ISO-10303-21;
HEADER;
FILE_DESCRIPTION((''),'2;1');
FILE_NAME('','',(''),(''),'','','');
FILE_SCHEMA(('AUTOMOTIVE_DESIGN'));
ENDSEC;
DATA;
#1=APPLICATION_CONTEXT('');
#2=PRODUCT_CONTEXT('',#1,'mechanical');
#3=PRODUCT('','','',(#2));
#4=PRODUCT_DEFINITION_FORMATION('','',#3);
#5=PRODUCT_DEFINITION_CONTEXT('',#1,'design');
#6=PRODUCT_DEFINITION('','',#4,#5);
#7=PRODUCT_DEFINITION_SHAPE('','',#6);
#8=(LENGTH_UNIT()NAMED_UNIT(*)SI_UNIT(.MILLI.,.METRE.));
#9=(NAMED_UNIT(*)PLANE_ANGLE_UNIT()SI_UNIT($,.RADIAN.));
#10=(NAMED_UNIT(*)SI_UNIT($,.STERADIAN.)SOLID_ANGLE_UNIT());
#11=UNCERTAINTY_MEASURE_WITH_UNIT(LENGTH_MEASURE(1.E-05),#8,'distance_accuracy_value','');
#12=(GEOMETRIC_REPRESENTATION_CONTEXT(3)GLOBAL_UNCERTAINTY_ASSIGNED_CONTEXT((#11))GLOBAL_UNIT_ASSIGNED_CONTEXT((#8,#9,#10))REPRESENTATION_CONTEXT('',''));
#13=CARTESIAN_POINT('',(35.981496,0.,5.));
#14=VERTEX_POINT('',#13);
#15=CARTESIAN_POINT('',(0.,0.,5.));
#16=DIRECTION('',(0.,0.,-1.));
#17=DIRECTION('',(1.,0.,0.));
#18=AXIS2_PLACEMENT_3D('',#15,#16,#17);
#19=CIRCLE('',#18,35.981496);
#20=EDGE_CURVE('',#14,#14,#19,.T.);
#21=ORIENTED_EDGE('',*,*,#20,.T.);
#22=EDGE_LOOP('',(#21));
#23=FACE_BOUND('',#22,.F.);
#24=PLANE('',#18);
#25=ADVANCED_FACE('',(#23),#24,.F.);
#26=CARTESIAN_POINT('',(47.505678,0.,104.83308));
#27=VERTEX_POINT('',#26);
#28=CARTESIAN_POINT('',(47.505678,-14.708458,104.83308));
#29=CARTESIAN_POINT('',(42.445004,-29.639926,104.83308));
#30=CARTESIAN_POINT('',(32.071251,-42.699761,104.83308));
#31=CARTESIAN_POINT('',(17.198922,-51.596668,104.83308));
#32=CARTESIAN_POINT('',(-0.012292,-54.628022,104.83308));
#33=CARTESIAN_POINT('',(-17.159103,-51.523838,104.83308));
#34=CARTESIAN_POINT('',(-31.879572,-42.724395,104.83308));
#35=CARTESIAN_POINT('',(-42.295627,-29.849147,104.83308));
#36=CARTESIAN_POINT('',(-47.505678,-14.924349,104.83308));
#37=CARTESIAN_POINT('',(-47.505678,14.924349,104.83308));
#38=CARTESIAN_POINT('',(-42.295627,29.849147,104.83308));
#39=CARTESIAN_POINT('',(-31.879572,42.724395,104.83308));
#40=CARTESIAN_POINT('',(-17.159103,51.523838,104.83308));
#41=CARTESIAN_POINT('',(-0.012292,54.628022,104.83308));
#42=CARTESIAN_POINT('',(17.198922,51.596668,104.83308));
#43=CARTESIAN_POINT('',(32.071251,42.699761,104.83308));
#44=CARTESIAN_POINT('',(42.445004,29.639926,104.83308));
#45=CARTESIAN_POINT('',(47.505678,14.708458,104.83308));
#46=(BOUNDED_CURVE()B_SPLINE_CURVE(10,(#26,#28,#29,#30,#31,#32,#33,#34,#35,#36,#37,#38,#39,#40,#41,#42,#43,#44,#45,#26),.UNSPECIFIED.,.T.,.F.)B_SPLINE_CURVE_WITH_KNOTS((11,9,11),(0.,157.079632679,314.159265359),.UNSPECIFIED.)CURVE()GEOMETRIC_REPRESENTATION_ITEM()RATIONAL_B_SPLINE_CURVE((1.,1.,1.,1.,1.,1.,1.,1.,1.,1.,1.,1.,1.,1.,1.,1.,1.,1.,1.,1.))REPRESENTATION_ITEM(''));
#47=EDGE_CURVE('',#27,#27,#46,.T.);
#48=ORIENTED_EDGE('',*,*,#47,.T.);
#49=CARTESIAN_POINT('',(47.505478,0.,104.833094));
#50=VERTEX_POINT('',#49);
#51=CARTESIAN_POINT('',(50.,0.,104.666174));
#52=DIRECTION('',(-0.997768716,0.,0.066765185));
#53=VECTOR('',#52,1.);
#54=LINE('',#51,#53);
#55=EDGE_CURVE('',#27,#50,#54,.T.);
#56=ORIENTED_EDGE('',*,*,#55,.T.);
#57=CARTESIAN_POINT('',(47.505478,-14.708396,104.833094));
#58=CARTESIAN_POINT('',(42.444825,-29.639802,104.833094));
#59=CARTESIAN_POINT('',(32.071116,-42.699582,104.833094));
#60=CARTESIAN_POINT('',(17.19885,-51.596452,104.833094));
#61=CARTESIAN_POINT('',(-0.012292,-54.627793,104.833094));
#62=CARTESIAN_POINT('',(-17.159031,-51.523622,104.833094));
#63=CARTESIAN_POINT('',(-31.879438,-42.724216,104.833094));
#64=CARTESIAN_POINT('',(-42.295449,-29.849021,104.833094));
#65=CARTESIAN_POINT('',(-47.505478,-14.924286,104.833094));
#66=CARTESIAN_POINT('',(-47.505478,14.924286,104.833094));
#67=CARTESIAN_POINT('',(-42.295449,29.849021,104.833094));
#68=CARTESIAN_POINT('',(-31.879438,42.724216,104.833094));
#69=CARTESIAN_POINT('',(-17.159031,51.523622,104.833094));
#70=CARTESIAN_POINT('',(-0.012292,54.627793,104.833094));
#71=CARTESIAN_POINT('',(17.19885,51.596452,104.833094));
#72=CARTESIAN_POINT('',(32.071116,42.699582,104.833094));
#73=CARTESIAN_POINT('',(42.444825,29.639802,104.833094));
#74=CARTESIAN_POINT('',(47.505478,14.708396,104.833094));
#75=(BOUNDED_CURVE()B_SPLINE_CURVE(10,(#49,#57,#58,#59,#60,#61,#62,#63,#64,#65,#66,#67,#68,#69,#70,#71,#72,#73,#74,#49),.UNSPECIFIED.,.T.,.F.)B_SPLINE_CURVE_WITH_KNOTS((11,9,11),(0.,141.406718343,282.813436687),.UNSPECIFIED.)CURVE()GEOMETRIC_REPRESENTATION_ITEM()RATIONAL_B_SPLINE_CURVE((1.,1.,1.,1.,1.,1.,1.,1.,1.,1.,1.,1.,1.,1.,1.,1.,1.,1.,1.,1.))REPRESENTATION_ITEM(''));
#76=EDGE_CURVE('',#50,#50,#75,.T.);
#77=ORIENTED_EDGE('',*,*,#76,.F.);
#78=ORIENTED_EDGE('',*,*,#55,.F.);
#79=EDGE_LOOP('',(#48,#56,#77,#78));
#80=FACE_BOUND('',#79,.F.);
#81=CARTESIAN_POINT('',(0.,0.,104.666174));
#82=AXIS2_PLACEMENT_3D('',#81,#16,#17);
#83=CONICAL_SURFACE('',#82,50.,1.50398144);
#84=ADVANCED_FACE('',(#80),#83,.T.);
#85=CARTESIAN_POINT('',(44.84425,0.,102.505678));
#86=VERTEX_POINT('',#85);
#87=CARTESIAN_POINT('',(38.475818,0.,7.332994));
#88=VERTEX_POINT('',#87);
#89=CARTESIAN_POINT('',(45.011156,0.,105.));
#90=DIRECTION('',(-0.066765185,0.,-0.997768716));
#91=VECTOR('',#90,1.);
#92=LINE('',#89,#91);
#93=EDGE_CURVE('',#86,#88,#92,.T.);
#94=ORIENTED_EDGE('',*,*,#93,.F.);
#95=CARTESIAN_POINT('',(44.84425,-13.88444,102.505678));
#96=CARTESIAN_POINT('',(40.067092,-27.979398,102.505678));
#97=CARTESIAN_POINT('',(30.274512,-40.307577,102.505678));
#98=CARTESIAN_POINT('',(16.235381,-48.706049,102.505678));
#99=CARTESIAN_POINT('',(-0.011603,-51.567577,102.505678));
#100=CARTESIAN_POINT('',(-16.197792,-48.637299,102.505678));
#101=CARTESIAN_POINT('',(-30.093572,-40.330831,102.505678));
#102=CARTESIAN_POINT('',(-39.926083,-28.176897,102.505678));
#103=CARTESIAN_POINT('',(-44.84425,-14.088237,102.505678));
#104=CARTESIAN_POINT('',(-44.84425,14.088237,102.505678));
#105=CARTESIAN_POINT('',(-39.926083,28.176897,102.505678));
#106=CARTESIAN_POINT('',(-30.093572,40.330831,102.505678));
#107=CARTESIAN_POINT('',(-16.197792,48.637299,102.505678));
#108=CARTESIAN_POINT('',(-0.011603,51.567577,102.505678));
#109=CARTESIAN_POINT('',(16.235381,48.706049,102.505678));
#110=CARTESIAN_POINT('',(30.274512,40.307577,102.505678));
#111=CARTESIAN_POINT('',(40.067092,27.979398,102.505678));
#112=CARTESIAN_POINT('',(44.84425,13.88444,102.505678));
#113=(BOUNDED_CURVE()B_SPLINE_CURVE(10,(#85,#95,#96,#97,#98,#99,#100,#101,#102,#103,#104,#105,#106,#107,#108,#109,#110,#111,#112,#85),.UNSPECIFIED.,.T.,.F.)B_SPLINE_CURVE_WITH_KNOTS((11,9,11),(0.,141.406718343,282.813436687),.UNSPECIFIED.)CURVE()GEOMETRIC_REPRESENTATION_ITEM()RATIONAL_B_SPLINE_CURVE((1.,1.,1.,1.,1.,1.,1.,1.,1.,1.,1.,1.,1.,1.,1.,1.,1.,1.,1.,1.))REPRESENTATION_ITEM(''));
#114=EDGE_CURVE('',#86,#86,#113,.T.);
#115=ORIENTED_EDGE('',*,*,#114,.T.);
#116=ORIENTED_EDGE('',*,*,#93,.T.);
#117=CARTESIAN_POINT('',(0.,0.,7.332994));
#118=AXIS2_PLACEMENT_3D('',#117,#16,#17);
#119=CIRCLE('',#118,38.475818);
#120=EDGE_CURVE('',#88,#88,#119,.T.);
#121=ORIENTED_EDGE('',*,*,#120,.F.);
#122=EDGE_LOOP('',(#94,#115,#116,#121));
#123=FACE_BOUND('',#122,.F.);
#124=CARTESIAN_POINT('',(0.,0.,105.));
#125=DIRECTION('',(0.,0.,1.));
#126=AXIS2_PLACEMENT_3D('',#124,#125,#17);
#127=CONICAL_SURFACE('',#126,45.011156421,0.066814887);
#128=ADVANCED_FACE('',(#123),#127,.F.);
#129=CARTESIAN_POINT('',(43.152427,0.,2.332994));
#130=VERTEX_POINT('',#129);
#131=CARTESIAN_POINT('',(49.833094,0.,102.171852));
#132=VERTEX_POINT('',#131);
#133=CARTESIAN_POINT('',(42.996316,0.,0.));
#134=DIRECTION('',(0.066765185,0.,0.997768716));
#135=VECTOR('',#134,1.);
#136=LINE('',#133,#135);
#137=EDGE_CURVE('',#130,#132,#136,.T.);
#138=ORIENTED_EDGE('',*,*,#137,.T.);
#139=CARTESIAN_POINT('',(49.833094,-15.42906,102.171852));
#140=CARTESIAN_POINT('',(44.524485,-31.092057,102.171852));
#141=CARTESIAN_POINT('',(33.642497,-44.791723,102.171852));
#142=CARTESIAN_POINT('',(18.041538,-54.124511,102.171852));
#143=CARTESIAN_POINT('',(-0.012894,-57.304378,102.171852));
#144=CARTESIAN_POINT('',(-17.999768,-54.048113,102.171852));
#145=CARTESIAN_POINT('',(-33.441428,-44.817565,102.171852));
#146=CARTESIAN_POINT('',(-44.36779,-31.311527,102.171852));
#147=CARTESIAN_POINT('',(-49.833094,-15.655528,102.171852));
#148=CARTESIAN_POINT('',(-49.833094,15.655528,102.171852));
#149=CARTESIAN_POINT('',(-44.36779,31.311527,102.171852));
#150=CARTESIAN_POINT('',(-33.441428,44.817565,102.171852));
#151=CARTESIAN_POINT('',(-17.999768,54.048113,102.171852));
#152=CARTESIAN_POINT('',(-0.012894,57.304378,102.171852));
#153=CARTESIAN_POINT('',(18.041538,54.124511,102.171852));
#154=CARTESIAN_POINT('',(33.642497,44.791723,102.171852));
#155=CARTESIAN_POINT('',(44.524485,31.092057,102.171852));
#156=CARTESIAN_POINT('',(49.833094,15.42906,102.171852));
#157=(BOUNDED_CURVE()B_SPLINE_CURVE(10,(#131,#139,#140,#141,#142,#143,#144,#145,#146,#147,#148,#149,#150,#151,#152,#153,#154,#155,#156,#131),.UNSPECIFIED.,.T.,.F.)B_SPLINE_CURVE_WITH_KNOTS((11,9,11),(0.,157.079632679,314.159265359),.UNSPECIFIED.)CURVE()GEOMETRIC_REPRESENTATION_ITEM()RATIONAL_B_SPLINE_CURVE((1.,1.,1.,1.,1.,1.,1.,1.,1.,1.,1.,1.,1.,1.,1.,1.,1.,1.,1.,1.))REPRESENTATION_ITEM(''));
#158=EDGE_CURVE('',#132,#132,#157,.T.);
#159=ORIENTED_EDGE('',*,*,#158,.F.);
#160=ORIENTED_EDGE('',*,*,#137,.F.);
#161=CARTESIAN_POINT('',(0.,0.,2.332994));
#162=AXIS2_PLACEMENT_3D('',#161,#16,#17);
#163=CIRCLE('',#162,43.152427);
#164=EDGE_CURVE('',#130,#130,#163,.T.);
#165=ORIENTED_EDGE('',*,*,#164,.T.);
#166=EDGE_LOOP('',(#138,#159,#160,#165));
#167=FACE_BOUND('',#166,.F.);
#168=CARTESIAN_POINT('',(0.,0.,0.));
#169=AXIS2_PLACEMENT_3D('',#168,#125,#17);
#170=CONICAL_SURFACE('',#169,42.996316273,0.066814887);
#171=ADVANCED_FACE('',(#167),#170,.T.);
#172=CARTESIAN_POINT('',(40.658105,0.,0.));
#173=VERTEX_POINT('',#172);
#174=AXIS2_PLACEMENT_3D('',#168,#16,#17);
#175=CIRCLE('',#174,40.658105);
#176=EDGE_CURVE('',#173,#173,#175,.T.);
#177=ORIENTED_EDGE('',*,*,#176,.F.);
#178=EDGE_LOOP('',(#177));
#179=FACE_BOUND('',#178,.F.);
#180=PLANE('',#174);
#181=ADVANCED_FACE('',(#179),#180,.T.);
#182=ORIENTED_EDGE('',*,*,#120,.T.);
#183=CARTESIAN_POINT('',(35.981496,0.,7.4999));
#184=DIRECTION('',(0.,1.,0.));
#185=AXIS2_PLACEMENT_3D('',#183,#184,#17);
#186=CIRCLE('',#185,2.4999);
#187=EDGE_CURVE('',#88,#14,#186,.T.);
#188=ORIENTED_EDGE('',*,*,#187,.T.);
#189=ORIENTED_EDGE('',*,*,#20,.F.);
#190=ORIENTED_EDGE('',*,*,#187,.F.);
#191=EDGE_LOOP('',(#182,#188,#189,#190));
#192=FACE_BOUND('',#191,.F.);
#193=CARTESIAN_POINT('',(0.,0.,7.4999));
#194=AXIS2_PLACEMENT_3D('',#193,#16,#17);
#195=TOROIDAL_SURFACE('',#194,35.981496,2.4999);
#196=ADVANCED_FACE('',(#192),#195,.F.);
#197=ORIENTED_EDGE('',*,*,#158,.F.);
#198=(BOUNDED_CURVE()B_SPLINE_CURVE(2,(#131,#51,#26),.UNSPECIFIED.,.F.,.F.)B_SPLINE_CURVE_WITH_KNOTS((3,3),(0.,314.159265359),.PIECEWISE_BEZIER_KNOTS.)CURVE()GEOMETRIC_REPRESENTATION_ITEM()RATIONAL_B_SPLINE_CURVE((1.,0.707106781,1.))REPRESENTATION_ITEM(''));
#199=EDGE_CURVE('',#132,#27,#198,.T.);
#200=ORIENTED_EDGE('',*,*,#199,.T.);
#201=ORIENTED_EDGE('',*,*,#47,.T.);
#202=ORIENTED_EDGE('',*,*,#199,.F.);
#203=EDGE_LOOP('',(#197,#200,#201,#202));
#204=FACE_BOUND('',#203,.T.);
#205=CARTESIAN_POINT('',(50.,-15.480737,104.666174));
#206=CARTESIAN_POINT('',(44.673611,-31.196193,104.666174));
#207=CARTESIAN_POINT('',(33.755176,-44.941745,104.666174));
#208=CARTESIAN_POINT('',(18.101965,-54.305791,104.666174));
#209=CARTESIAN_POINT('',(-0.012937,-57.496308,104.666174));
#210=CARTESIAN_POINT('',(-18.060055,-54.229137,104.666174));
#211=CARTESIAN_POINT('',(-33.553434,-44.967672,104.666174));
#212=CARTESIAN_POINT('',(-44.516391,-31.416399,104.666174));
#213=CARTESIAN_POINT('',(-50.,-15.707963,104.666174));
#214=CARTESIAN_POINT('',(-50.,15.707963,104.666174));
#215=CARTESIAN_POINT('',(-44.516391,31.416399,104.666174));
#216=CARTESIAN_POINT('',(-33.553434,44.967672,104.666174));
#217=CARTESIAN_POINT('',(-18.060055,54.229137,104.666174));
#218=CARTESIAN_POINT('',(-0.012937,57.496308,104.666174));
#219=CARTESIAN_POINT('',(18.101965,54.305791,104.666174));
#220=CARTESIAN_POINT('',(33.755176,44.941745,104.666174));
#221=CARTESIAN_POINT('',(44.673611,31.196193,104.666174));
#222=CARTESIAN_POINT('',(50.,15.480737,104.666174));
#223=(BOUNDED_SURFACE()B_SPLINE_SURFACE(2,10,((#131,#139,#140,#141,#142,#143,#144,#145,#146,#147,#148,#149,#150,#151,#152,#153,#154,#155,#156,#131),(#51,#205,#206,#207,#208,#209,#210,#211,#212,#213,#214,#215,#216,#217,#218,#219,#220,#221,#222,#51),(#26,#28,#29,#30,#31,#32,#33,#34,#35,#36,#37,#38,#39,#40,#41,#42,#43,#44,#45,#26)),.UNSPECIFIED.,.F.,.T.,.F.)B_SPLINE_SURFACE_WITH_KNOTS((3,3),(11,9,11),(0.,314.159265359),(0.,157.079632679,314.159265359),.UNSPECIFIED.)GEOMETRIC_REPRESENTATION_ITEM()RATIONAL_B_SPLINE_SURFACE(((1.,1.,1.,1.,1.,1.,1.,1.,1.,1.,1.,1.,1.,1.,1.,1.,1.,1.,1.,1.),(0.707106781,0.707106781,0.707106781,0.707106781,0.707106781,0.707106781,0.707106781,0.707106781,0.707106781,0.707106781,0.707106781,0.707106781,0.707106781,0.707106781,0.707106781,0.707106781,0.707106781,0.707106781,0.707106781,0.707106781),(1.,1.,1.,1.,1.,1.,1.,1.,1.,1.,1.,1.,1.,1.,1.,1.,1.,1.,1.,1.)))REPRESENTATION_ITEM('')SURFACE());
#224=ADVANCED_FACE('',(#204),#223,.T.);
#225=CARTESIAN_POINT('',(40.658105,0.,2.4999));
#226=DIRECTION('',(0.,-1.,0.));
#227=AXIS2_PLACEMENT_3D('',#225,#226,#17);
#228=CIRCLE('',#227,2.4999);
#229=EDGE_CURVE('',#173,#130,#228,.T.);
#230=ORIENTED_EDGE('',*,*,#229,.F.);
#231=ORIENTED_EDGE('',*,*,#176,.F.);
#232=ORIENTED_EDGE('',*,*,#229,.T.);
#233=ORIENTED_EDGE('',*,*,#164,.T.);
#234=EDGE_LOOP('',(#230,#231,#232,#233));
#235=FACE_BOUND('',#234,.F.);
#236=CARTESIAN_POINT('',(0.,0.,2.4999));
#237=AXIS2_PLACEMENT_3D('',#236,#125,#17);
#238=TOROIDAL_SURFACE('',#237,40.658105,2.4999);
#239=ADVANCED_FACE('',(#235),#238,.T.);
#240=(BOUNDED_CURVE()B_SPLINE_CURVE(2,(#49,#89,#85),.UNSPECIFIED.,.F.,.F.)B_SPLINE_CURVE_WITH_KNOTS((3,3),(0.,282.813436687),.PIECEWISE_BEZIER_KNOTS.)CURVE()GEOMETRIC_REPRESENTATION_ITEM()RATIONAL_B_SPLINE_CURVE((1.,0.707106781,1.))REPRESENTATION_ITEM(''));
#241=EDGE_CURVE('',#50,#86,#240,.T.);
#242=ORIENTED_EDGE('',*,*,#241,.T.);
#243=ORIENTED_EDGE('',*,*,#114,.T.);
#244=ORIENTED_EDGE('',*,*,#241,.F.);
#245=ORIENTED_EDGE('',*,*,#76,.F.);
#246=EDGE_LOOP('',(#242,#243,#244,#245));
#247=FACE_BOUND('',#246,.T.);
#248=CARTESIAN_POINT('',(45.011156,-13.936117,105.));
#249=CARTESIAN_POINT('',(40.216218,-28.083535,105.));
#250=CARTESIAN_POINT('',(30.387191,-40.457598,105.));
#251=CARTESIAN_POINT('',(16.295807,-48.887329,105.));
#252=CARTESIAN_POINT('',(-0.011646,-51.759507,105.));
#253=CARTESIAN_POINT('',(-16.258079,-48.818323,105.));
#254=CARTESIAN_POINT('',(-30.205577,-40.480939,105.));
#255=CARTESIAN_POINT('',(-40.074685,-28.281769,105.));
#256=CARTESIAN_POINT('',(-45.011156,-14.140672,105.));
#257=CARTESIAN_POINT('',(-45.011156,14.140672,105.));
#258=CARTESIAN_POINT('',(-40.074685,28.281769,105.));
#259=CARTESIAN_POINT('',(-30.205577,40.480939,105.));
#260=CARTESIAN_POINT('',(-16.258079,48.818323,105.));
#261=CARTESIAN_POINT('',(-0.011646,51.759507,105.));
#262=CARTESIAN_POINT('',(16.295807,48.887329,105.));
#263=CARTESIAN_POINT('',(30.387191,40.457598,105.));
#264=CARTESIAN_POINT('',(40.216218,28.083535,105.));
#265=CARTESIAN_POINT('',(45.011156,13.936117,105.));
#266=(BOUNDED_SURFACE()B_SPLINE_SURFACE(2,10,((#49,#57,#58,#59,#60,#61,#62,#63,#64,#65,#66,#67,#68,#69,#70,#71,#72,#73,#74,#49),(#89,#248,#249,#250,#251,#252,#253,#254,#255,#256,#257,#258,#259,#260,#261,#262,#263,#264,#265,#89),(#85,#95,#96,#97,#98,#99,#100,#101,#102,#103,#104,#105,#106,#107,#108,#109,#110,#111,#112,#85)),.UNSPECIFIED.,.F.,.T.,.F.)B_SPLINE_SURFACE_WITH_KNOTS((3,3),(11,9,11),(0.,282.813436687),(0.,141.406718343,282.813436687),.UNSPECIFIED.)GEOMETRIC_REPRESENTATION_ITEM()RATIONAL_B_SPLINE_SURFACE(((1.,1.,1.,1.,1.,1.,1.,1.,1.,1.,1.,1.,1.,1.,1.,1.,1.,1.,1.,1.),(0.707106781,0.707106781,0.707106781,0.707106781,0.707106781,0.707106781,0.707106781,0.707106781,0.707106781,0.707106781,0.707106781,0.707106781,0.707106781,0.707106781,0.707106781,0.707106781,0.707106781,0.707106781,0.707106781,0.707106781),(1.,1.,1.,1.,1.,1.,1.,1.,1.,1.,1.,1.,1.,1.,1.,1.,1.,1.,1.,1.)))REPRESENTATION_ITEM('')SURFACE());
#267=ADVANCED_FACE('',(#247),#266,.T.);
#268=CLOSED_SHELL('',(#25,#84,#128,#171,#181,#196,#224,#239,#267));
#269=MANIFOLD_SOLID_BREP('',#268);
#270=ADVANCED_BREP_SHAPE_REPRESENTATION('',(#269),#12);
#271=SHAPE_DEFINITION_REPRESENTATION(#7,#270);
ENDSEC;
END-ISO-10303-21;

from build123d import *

# Parameters (mm, degrees)
F2_R = 2.4999


# Not quite as in the source:
# - a fillet or chamfer is up to 0.001 mm smaller than in the source, because OpenCascade refuses the exact size


with BuildPart() as f1:
    # F0 (on Front) → F1 (revolve)
    with BuildSketch(Plane.XZ):
        Polygon((0, 5), (0, 0), (42.9963162733, 0), (50, 104.666174073), (45.0111564215, 105), (38.3197073562, 5), align=None)
    revolve(axis=Axis((0, 0, 2.5), (0, 0, -1)))

    # F2 (radius 2.5 in the source; OpenCascade refuses exactly that, so slightly less here)
    f2_edges = [f1.edges().sort_by_distance(p)[0] for p in [
        (-50, 0, 104.666174),
        (-45.011156, 0, 105),
        (-42.996316, 0, 0),
        (-38.319707, 0, 5),
    ]]
    fillet(f2_edges, radius=F2_R)


solid = f1.part
